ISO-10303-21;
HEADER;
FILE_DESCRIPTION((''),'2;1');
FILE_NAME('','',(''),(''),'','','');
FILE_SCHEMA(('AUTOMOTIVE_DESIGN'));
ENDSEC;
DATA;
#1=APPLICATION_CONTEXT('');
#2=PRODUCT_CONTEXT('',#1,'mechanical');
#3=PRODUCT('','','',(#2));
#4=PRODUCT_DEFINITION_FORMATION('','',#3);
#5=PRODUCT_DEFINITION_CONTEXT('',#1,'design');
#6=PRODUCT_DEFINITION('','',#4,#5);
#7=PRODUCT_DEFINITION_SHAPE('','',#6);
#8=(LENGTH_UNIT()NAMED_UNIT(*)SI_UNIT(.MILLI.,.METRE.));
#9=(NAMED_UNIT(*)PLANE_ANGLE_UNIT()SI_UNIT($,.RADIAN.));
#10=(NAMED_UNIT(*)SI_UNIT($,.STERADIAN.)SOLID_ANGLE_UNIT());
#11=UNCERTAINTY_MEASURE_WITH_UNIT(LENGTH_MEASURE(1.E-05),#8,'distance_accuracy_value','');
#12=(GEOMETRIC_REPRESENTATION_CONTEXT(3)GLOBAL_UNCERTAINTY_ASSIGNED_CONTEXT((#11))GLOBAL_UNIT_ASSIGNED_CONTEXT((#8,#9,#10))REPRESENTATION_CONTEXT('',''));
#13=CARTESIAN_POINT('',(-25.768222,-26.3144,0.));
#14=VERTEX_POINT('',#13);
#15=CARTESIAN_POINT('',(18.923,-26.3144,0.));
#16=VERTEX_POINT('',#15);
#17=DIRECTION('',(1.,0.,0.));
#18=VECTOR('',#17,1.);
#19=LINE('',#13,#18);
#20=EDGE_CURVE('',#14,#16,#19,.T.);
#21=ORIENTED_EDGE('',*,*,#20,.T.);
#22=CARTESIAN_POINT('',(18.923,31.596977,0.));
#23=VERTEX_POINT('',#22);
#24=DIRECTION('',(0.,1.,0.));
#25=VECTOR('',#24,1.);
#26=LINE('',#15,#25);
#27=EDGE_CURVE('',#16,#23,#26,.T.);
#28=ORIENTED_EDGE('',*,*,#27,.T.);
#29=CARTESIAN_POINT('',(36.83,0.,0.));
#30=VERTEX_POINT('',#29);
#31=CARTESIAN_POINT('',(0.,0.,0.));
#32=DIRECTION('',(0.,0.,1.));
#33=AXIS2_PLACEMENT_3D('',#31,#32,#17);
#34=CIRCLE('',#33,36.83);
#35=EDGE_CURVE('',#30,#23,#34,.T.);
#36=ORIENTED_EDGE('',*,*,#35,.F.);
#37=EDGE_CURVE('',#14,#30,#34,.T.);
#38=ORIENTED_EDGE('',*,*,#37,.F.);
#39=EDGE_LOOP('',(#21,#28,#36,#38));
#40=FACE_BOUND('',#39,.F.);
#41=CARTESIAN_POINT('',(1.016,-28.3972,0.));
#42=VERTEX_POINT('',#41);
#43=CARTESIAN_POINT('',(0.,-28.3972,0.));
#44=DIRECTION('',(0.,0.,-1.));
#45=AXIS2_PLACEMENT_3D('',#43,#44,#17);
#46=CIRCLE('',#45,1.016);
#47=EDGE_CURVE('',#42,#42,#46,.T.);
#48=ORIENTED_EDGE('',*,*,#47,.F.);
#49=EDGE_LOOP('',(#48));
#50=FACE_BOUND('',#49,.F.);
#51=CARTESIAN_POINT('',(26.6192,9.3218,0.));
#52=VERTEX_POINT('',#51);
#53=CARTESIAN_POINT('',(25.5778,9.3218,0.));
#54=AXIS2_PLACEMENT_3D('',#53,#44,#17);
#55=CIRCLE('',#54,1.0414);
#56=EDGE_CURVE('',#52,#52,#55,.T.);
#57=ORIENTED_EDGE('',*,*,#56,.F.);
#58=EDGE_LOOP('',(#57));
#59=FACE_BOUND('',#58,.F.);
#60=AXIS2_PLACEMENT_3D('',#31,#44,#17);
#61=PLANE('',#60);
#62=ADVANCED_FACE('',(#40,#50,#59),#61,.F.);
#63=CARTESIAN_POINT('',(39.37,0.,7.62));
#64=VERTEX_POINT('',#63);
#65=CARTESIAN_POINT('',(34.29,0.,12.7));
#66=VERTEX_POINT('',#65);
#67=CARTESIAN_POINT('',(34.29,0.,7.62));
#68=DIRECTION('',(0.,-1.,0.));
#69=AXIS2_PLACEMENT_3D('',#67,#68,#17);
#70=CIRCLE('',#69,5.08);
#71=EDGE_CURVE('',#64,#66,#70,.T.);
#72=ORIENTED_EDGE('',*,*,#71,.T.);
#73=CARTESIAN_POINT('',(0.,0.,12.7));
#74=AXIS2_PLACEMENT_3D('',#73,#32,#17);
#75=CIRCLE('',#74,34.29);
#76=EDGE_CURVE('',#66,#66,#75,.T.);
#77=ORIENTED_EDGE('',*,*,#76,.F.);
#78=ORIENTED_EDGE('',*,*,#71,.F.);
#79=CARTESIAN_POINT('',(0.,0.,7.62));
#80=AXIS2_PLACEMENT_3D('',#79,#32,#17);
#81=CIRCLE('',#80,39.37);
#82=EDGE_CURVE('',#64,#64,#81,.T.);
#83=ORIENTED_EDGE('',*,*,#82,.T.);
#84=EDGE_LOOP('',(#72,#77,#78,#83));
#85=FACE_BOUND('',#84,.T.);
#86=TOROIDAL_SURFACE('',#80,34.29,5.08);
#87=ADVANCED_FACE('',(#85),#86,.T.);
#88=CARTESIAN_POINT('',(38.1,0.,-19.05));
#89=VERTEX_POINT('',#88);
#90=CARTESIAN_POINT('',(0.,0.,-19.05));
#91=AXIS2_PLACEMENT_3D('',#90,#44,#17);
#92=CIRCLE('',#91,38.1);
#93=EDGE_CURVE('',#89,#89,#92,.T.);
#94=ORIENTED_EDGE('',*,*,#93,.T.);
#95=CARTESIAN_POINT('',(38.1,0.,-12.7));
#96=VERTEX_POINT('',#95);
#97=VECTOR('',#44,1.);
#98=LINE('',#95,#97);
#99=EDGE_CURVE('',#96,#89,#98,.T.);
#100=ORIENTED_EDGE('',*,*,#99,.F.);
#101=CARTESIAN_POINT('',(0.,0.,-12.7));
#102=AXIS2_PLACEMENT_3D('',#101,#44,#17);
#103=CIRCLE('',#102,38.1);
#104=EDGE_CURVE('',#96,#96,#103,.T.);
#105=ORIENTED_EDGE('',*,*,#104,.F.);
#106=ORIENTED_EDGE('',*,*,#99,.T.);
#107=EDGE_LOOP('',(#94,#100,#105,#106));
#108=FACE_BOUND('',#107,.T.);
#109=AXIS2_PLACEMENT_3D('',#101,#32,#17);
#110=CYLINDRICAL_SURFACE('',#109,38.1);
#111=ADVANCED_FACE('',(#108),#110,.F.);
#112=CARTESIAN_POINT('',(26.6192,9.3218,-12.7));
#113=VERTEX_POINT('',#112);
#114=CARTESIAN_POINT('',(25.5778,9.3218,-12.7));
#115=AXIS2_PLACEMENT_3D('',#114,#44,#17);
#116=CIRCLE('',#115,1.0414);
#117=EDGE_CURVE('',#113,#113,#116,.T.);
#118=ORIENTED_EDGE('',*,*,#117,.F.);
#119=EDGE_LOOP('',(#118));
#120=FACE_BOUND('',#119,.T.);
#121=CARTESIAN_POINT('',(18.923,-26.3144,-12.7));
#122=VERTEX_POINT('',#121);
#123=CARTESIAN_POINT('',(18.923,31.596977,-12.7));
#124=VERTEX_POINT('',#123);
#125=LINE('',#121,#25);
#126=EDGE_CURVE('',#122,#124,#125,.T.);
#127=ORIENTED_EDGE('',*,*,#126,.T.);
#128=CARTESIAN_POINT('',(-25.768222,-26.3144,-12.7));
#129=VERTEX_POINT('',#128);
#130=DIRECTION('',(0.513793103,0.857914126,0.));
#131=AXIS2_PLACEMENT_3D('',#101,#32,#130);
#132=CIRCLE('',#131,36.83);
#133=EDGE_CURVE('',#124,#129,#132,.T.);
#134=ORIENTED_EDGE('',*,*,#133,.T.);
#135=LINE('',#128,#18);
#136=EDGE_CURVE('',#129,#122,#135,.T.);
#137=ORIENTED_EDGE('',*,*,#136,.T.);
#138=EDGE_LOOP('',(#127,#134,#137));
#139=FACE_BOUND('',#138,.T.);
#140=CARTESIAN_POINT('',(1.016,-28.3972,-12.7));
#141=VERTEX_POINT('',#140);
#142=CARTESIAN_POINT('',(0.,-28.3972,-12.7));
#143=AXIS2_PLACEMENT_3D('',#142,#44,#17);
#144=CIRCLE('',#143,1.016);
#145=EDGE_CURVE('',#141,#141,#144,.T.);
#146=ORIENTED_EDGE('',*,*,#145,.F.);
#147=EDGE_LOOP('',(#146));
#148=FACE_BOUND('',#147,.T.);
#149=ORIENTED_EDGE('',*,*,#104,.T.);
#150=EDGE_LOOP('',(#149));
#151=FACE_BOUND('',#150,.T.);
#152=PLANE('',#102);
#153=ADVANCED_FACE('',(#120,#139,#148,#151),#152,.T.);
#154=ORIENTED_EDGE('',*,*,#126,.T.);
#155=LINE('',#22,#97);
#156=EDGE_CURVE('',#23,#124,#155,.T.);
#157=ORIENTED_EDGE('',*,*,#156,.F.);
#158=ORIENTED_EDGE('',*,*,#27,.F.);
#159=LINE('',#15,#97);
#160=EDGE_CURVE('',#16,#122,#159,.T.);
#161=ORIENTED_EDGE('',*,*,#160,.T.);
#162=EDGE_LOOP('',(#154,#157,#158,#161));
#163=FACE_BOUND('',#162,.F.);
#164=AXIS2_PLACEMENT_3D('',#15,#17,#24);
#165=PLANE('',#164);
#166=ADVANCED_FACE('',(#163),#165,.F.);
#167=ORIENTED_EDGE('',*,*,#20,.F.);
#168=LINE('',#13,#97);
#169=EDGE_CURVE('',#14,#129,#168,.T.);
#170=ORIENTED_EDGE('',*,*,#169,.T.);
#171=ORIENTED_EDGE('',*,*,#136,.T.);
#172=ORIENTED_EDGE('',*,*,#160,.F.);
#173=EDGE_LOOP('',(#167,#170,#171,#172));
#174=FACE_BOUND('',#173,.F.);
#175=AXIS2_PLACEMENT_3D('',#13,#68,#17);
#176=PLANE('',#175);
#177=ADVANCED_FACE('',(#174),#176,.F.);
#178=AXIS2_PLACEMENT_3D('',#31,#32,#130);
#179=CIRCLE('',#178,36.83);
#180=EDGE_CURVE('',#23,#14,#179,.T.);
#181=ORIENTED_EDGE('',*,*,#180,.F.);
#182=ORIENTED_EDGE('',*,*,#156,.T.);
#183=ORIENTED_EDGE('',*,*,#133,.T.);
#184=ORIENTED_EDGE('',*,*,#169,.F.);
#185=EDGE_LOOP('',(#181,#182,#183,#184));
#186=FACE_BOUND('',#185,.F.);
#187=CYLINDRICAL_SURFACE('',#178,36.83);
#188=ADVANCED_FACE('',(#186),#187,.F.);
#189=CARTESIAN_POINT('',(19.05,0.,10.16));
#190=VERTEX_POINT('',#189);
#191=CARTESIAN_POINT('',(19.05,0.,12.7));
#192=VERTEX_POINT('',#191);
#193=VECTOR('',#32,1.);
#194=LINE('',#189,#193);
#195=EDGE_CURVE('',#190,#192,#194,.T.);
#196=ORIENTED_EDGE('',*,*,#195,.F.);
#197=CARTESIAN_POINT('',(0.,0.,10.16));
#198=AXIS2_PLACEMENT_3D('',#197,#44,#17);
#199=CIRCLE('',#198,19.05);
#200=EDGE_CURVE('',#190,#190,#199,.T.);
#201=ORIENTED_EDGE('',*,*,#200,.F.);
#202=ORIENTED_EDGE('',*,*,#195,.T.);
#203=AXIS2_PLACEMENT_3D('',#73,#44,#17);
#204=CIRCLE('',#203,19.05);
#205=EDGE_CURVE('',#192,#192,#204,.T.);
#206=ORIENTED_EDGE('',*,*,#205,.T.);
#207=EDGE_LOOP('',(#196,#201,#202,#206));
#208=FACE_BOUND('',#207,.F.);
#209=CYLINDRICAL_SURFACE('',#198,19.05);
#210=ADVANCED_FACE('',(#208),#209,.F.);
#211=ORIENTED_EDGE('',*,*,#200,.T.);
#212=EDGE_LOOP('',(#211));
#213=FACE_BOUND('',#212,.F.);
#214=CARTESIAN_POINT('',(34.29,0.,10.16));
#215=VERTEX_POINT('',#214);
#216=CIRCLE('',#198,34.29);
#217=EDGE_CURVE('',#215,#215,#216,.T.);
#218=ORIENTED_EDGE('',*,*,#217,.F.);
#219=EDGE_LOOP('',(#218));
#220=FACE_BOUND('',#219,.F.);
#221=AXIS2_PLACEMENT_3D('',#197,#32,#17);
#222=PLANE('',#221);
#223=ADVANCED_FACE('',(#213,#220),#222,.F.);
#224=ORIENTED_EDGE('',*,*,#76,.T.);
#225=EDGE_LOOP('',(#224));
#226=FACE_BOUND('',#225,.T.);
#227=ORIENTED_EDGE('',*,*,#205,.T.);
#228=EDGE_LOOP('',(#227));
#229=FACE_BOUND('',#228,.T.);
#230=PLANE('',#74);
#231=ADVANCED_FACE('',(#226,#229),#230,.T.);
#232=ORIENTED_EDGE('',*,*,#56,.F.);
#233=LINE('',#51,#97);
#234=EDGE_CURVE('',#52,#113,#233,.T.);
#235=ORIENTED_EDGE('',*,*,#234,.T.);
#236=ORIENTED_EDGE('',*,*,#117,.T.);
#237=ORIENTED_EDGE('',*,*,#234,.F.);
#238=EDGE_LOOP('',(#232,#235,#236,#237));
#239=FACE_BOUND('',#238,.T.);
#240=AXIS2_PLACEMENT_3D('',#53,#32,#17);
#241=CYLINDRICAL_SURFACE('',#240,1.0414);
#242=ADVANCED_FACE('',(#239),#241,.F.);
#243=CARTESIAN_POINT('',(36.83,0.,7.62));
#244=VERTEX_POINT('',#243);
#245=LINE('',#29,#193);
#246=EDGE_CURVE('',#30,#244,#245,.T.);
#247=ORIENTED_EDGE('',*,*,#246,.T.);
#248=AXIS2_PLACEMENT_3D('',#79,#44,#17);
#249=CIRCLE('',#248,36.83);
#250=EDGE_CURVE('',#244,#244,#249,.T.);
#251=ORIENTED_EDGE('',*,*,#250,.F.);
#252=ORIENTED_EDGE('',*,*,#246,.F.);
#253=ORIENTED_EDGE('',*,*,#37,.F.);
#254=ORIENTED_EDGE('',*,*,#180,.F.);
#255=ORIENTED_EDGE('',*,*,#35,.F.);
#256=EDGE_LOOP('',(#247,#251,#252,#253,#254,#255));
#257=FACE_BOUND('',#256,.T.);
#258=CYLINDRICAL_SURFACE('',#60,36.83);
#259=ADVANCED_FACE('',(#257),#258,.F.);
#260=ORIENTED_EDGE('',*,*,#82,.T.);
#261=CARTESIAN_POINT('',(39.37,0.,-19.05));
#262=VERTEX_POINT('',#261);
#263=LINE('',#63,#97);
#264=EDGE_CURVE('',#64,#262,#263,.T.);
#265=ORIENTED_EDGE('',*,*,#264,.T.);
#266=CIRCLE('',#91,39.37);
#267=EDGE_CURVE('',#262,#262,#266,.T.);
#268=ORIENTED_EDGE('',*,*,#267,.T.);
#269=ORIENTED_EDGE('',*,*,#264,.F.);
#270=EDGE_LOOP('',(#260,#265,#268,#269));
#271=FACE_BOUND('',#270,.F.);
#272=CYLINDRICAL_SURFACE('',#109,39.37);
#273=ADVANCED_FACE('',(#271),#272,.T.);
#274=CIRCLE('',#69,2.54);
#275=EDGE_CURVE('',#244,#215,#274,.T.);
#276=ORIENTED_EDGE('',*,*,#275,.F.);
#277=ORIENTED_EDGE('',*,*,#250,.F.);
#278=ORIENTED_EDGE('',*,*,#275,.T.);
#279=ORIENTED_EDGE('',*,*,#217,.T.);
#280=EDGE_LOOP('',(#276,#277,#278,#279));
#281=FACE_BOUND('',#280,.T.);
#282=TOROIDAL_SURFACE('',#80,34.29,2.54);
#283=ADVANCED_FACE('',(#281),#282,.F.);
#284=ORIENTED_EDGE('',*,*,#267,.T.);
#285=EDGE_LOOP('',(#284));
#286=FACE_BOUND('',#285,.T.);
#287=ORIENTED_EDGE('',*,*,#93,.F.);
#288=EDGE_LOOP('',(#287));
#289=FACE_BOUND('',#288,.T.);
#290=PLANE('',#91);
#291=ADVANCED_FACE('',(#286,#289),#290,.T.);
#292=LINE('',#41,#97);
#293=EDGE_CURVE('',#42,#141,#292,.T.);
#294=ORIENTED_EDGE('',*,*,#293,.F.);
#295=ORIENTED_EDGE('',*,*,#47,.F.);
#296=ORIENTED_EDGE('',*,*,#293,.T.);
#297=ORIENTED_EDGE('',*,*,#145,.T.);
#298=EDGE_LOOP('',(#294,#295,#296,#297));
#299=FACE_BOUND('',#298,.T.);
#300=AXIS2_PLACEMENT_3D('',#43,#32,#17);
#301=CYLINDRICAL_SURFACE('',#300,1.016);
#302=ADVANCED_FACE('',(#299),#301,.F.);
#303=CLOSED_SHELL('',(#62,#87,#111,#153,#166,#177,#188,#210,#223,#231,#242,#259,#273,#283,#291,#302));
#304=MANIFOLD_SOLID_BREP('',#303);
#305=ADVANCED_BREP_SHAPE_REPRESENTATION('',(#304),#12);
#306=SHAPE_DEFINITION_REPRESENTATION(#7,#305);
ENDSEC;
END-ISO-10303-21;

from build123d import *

# Parameters (mm, degrees)
F0_R      = 39.37
F1_DEPTH  = 12.7
F2_T      = -2.54
F3_R      = 5.08
F4_R      = 2.54
F5_R      = 19.05
F6_DEPTH  = 25.4
F7_R      = 39.37
F7_R_2    = 1.0414
F7_R_3    = 1.016
F8_DEPTH  = 12.7
F9_R      = 39.37
F9_R_2    = 38.1
F10_DEPTH = 6.35


with BuildPart() as f1:
    # F0 (on Top) → F1 (new body)
    with BuildSketch(Plane.XY):
        Circle(F0_R)
    extrude(amount=F1_DEPTH)

    # F2
    f2_openings = [f1.faces().sort_by_distance(p)[0] for p in [
        (0, 0, 0),
    ]]
    offset(amount=F2_T, openings=f2_openings)

    # F3
    f3_edges = [f1.edges().sort_by_distance(p)[0] for p in [
        (-39.37, 0, 12.7),
    ]]
    fillet(f3_edges, radius=F3_R)

    # F4
    f4_edges = [f1.edges().sort_by_distance(p)[0] for p in [
        (-36.83, 0, 10.16),
    ]]
    fillet(f4_edges, radius=F4_R)

    # F5 (on face) → F6 (cut)
    with BuildSketch(Plane(origin=(0, 0, 10.16), x_dir=(1, 0, 0), z_dir=(0, 0, -1))):
        Circle(F5_R)
    extrude(amount=-F6_DEPTH, mode=Mode.SUBTRACT)

    # F7 (on face) → F8 (join)
    with BuildSketch(Plane(origin=(0, 0, 0), x_dir=(1, 0, 0), z_dir=(0, 0, -1))):
        Circle(F7_R)
        with BuildLine():
            ThreePointArc((18.923, -31.5969772447), (-29.1572661412, -22.5011717733), (-25.7682217594, 26.3144))
            Line((-25.7682217594, 26.3144), (18.923, 26.3144))
            Line((18.923, 26.3144), (18.923, -31.5969772447))
        make_face(mode=Mode.SUBTRACT)
        with Locations((25.5778, -9.3218)):
            Circle(F7_R_2, mode=Mode.SUBTRACT)
        with Locations((0, 28.3972)):
            Circle(F7_R_3, mode=Mode.SUBTRACT)
    extrude(amount=F8_DEPTH)

    # F9 (on face) → F10 (join)
    with BuildSketch(Plane(origin=(0, 0, -12.7), x_dir=(1, 0, 0), z_dir=(0, 0, -1))):
        Circle(F9_R)
        Circle(F9_R_2, mode=Mode.SUBTRACT)
    extrude(amount=F10_DEPTH)


solid = f1.part
